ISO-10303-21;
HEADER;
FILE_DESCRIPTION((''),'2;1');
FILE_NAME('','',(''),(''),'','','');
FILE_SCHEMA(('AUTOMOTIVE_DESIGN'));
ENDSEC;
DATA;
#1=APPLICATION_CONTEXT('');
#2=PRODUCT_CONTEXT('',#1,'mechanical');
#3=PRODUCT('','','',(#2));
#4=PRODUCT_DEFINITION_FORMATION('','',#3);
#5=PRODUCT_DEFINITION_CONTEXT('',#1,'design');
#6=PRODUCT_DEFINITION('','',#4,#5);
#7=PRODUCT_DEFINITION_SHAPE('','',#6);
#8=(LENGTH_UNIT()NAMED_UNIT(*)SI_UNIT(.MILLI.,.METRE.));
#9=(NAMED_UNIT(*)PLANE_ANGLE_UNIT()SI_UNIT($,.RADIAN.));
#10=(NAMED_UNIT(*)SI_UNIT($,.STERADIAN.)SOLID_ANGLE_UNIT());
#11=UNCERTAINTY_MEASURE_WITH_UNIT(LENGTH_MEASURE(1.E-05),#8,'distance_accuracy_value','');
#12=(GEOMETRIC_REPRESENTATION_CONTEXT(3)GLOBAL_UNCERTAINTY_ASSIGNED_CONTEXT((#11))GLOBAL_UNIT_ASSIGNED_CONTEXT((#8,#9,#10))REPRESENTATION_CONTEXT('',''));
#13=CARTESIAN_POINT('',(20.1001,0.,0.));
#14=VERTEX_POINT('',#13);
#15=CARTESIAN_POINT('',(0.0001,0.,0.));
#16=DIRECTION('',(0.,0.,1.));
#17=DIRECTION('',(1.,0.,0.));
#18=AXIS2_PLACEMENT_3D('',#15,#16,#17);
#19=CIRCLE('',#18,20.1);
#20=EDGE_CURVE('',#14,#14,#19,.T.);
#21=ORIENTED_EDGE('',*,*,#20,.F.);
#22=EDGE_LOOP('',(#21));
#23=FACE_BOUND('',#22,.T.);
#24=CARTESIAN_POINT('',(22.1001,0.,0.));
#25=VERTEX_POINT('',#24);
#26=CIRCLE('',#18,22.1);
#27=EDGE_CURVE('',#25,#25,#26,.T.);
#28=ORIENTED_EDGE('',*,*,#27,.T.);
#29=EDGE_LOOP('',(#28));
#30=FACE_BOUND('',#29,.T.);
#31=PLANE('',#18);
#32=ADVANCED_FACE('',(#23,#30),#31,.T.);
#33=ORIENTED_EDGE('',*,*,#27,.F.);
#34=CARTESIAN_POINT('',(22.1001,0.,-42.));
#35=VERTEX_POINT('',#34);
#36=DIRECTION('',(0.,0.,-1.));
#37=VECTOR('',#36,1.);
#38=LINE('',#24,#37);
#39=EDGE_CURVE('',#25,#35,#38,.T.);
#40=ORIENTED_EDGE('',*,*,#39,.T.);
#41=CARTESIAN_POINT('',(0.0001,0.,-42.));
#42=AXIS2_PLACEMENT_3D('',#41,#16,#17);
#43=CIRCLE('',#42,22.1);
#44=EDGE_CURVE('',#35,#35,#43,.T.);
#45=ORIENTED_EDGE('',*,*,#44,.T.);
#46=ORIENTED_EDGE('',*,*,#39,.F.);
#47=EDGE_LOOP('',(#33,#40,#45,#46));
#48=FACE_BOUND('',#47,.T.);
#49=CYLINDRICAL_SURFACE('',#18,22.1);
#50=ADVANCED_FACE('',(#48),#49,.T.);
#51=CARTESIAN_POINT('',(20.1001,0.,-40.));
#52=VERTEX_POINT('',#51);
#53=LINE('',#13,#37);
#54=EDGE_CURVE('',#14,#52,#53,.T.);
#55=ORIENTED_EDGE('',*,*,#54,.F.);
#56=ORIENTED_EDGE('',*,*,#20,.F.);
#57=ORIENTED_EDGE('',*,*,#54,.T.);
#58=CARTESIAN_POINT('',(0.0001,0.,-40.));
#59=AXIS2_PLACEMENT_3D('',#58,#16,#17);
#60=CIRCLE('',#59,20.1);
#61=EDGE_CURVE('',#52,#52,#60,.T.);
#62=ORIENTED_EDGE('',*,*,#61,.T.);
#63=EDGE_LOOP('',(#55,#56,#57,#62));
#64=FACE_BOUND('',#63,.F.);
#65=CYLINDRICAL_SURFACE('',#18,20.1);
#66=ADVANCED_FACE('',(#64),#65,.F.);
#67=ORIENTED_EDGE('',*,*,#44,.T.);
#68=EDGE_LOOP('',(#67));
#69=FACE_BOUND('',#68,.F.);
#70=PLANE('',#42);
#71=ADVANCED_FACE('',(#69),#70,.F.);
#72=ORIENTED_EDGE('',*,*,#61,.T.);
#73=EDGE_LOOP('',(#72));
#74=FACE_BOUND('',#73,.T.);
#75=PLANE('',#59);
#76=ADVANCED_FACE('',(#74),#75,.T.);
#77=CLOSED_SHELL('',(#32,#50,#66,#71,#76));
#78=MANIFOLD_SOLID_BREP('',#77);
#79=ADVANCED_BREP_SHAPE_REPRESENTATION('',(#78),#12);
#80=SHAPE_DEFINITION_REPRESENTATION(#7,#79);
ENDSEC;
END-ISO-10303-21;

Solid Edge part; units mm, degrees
sketch "Sketch1" plane through (0, 0, 0) normal (0, 0, 1) x (1, 0, 0)
  circle A0 centre (0.0001, 0) radius 20.1
extrude "Protrusion1" add sketch "Sketch1" against normal blind 40
shell "Thinwall_3" thickness 0 removed faces 1 at (-13.8019, -12.998, 0) outside thickness 2
